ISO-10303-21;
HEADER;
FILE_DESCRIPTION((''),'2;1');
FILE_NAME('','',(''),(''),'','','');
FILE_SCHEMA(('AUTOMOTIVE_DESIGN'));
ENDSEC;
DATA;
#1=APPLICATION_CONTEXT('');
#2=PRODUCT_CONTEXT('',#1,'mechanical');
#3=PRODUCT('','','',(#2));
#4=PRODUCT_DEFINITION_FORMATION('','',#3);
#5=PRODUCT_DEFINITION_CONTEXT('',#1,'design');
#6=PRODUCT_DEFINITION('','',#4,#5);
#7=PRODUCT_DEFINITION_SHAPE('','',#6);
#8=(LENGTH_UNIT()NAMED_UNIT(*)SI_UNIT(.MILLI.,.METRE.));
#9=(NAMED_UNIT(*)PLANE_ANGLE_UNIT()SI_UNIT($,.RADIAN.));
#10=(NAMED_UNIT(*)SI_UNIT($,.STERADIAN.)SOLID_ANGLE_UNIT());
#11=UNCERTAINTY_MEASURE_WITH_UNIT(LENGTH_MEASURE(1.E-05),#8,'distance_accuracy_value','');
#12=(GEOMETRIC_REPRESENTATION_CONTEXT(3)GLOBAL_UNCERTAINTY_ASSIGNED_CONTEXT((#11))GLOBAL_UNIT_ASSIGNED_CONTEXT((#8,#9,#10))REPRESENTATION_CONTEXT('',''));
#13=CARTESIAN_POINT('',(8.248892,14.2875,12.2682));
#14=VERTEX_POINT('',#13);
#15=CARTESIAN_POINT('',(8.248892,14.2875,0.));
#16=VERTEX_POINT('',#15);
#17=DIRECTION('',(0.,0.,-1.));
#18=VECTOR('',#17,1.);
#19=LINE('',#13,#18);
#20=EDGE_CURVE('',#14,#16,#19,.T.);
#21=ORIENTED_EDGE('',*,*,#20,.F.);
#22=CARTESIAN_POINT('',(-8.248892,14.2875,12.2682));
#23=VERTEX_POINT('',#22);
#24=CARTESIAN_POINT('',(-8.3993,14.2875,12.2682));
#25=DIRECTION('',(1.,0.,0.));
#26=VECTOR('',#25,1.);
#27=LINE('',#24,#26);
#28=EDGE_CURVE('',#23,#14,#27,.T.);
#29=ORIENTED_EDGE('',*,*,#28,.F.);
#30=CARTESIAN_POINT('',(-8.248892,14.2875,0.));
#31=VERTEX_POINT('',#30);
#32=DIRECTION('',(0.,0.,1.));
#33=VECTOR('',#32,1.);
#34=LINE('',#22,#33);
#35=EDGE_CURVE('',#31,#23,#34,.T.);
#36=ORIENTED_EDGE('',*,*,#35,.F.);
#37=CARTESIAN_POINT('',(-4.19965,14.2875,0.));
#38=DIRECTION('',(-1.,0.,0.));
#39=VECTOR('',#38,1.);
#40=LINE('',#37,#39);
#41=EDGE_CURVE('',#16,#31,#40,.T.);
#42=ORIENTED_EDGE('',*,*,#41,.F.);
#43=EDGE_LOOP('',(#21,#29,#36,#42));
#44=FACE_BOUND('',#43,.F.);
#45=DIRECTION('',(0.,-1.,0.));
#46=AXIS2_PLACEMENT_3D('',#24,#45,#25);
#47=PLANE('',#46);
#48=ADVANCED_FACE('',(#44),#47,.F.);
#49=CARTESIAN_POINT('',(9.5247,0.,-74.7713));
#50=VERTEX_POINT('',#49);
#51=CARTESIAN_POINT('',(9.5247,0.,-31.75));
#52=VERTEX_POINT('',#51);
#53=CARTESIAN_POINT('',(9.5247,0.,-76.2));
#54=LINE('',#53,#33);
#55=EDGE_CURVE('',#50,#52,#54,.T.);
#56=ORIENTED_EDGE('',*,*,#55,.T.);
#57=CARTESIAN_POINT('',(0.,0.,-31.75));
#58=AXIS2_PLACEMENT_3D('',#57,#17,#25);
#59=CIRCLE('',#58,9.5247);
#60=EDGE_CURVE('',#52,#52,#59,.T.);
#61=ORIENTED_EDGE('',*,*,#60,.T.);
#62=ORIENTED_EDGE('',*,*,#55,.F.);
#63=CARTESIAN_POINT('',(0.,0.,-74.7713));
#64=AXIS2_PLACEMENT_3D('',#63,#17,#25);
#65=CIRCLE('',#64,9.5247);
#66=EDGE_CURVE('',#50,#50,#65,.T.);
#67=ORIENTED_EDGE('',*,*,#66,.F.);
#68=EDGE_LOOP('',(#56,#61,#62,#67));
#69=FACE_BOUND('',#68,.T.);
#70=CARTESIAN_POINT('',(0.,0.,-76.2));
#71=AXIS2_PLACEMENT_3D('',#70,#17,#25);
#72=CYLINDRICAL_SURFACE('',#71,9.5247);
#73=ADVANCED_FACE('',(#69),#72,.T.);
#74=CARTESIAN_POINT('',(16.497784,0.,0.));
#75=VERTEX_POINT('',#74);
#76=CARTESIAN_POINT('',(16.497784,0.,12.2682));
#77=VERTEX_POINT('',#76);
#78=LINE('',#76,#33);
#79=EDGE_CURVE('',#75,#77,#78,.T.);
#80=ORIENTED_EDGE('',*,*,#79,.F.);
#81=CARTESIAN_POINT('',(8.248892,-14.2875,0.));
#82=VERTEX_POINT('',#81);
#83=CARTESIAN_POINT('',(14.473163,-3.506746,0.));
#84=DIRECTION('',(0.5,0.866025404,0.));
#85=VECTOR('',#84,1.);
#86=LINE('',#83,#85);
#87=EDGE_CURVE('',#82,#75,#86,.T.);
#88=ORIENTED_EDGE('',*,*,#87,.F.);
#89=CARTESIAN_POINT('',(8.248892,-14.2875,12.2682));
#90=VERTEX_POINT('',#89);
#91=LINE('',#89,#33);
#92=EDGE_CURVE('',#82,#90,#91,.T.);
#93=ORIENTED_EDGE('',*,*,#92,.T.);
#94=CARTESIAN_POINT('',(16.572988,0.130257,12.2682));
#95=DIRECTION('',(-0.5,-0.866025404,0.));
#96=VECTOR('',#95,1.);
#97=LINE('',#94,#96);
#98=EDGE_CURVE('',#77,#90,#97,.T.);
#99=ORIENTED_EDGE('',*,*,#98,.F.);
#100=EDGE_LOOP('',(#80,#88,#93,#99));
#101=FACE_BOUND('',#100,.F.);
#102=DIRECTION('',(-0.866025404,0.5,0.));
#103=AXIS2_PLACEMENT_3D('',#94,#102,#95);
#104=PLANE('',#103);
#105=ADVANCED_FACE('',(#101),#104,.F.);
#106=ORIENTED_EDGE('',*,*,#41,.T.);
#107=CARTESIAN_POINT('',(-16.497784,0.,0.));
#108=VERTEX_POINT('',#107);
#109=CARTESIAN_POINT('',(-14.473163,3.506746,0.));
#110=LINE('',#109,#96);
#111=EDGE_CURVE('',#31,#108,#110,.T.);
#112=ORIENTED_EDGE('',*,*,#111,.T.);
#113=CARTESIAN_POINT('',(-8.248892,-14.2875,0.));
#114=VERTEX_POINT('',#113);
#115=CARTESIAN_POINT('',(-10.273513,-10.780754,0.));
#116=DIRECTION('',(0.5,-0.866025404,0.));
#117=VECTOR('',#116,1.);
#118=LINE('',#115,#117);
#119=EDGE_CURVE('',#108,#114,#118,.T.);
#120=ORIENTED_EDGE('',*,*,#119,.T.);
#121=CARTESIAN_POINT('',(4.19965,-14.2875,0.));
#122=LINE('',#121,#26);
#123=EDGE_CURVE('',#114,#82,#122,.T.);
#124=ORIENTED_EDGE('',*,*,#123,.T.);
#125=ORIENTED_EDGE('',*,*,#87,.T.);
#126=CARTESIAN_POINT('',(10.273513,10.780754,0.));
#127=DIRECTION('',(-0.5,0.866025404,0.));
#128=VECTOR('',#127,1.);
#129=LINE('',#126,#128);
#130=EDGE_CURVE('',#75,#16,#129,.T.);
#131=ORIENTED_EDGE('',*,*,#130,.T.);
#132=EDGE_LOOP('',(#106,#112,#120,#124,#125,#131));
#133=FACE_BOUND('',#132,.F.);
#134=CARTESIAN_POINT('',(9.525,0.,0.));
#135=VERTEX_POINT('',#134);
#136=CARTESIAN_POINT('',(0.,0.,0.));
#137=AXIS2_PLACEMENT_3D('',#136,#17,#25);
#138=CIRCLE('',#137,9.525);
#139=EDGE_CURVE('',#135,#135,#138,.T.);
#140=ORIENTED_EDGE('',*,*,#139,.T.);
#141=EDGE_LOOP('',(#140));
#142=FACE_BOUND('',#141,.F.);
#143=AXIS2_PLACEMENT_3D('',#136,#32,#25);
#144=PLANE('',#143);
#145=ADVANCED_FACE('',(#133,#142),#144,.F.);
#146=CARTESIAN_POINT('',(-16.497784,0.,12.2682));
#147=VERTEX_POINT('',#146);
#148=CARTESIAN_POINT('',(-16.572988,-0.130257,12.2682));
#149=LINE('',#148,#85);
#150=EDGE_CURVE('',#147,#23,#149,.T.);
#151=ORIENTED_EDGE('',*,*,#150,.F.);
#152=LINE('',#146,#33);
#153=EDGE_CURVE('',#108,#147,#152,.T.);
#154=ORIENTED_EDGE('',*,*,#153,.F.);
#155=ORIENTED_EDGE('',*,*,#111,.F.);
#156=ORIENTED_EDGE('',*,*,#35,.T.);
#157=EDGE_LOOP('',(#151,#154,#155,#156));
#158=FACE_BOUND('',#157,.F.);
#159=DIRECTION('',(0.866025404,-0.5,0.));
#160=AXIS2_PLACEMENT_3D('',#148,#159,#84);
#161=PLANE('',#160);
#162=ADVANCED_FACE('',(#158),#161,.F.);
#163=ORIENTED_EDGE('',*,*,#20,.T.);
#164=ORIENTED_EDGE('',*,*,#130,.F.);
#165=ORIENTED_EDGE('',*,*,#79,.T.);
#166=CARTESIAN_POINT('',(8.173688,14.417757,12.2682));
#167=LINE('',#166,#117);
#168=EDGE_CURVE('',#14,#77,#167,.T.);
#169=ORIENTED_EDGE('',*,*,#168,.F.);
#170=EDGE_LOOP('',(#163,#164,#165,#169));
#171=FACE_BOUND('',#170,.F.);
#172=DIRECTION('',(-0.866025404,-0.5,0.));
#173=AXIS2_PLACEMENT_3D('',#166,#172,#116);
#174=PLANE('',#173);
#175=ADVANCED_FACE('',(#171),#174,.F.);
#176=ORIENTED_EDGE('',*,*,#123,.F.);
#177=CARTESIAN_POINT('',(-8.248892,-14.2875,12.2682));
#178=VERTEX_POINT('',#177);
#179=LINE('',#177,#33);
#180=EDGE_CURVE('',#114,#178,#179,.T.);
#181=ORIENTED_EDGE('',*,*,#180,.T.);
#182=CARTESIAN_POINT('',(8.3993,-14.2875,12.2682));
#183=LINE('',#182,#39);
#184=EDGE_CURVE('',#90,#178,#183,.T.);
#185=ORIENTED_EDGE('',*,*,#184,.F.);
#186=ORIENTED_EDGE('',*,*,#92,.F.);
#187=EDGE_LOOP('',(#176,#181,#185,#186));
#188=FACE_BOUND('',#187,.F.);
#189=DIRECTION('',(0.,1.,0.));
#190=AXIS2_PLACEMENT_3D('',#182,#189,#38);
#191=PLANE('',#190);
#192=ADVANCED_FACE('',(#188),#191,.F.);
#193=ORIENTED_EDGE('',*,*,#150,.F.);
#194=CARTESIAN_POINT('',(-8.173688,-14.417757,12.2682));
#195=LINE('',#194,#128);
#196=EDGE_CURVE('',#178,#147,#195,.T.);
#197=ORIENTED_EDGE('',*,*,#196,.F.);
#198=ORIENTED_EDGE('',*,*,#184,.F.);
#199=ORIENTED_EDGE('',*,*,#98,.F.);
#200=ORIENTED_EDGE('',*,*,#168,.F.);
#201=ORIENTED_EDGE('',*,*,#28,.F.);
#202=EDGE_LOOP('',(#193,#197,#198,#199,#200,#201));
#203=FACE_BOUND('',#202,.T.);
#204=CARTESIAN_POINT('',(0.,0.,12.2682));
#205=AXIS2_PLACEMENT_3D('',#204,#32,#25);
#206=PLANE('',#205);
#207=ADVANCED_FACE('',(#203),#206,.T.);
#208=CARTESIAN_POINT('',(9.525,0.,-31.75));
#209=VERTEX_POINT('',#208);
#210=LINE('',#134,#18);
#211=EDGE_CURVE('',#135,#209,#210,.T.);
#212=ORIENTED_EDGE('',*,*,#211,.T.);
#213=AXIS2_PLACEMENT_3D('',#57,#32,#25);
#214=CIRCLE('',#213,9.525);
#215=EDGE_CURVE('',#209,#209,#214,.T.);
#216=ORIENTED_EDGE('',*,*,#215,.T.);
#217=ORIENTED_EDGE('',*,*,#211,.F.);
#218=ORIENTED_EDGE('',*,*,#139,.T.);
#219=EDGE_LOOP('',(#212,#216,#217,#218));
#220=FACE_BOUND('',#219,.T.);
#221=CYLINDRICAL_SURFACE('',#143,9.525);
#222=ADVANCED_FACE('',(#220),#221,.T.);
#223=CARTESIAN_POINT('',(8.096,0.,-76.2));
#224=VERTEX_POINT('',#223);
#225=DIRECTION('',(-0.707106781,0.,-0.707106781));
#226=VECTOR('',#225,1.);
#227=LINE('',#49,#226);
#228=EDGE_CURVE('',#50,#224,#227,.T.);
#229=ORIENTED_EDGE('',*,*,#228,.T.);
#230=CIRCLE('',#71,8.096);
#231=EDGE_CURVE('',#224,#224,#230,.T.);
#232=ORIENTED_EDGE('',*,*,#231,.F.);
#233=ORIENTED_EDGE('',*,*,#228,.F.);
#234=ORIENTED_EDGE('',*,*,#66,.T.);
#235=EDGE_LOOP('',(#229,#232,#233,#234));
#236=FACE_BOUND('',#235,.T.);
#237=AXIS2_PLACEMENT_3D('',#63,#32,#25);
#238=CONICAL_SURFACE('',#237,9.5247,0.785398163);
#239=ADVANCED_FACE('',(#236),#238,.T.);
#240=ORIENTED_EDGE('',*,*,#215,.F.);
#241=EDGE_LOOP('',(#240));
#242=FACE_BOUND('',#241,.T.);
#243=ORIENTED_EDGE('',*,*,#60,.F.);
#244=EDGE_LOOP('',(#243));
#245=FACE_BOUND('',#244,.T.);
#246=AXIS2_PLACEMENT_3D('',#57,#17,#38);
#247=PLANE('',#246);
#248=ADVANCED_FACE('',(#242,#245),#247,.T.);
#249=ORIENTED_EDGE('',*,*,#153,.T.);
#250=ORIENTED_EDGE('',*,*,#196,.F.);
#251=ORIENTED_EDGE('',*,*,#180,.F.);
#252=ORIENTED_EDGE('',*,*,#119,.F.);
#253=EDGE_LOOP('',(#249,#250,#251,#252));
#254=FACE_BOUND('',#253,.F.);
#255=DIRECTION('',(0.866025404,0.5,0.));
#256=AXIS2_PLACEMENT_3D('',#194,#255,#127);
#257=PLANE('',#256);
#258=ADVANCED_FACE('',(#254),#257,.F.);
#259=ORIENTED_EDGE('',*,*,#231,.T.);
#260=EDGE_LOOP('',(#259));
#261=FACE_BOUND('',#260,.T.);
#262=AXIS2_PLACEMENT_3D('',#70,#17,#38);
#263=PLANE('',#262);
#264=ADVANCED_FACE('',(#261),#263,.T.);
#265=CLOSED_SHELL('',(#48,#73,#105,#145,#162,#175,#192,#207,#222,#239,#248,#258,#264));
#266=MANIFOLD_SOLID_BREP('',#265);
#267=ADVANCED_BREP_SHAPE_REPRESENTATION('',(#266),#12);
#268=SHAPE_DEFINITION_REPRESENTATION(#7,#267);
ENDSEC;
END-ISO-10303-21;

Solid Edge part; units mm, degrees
sketch "Sketch1" plane through (0, 0, 0) normal (0, 0, 1) x (1, 0, 0)
  circle A0 centre (0, 0) radius 16.5735
  dimension "D1" = 33.147
extrude "Protrusion1" add sketch "Sketch1" along normal blind 12.2682
sketch "Sketch2" plane through (0, 0, 0) normal (0, 0, -1) x (1, 0, 0)
  circle A0 centre (0, 0) radius 9.525
extrude "Protrusion2" add sketch "Sketch2" along normal blind 76.2
sketch "Sketch3" plane through (0, 0, -76.2) normal (0, 0, -1) x (1, 0, 0)
  circle A0 centre (0, 0) radius 9.5247
extrude "Cutout1" cut sketch "Sketch3" against normal blind 44.45 flip side to cut
chamfer "Chamfer_1" distance 1.4287 angle 45 1 edges at (-9.5247, 0, -76.2)
sketch "Sketch4" plane through (0, 0, 12.2682) normal (0, 0, 1) x (1, 0, 0)
  line L0 (-8.3993, 14.2875) -> (8.3993, 14.2875)
  dimension "D1" = 28.575
extrude "Cutout2" cut sketch "Sketch4" against normal up to next material side at (0, 14.3375, 12.2682)
pattern_circular "Pattern1" count 6 over 360 about axis through (0, 0, 12.2682) along (0, 0, 1) of "Cutout2"
properties part number "24103705"
